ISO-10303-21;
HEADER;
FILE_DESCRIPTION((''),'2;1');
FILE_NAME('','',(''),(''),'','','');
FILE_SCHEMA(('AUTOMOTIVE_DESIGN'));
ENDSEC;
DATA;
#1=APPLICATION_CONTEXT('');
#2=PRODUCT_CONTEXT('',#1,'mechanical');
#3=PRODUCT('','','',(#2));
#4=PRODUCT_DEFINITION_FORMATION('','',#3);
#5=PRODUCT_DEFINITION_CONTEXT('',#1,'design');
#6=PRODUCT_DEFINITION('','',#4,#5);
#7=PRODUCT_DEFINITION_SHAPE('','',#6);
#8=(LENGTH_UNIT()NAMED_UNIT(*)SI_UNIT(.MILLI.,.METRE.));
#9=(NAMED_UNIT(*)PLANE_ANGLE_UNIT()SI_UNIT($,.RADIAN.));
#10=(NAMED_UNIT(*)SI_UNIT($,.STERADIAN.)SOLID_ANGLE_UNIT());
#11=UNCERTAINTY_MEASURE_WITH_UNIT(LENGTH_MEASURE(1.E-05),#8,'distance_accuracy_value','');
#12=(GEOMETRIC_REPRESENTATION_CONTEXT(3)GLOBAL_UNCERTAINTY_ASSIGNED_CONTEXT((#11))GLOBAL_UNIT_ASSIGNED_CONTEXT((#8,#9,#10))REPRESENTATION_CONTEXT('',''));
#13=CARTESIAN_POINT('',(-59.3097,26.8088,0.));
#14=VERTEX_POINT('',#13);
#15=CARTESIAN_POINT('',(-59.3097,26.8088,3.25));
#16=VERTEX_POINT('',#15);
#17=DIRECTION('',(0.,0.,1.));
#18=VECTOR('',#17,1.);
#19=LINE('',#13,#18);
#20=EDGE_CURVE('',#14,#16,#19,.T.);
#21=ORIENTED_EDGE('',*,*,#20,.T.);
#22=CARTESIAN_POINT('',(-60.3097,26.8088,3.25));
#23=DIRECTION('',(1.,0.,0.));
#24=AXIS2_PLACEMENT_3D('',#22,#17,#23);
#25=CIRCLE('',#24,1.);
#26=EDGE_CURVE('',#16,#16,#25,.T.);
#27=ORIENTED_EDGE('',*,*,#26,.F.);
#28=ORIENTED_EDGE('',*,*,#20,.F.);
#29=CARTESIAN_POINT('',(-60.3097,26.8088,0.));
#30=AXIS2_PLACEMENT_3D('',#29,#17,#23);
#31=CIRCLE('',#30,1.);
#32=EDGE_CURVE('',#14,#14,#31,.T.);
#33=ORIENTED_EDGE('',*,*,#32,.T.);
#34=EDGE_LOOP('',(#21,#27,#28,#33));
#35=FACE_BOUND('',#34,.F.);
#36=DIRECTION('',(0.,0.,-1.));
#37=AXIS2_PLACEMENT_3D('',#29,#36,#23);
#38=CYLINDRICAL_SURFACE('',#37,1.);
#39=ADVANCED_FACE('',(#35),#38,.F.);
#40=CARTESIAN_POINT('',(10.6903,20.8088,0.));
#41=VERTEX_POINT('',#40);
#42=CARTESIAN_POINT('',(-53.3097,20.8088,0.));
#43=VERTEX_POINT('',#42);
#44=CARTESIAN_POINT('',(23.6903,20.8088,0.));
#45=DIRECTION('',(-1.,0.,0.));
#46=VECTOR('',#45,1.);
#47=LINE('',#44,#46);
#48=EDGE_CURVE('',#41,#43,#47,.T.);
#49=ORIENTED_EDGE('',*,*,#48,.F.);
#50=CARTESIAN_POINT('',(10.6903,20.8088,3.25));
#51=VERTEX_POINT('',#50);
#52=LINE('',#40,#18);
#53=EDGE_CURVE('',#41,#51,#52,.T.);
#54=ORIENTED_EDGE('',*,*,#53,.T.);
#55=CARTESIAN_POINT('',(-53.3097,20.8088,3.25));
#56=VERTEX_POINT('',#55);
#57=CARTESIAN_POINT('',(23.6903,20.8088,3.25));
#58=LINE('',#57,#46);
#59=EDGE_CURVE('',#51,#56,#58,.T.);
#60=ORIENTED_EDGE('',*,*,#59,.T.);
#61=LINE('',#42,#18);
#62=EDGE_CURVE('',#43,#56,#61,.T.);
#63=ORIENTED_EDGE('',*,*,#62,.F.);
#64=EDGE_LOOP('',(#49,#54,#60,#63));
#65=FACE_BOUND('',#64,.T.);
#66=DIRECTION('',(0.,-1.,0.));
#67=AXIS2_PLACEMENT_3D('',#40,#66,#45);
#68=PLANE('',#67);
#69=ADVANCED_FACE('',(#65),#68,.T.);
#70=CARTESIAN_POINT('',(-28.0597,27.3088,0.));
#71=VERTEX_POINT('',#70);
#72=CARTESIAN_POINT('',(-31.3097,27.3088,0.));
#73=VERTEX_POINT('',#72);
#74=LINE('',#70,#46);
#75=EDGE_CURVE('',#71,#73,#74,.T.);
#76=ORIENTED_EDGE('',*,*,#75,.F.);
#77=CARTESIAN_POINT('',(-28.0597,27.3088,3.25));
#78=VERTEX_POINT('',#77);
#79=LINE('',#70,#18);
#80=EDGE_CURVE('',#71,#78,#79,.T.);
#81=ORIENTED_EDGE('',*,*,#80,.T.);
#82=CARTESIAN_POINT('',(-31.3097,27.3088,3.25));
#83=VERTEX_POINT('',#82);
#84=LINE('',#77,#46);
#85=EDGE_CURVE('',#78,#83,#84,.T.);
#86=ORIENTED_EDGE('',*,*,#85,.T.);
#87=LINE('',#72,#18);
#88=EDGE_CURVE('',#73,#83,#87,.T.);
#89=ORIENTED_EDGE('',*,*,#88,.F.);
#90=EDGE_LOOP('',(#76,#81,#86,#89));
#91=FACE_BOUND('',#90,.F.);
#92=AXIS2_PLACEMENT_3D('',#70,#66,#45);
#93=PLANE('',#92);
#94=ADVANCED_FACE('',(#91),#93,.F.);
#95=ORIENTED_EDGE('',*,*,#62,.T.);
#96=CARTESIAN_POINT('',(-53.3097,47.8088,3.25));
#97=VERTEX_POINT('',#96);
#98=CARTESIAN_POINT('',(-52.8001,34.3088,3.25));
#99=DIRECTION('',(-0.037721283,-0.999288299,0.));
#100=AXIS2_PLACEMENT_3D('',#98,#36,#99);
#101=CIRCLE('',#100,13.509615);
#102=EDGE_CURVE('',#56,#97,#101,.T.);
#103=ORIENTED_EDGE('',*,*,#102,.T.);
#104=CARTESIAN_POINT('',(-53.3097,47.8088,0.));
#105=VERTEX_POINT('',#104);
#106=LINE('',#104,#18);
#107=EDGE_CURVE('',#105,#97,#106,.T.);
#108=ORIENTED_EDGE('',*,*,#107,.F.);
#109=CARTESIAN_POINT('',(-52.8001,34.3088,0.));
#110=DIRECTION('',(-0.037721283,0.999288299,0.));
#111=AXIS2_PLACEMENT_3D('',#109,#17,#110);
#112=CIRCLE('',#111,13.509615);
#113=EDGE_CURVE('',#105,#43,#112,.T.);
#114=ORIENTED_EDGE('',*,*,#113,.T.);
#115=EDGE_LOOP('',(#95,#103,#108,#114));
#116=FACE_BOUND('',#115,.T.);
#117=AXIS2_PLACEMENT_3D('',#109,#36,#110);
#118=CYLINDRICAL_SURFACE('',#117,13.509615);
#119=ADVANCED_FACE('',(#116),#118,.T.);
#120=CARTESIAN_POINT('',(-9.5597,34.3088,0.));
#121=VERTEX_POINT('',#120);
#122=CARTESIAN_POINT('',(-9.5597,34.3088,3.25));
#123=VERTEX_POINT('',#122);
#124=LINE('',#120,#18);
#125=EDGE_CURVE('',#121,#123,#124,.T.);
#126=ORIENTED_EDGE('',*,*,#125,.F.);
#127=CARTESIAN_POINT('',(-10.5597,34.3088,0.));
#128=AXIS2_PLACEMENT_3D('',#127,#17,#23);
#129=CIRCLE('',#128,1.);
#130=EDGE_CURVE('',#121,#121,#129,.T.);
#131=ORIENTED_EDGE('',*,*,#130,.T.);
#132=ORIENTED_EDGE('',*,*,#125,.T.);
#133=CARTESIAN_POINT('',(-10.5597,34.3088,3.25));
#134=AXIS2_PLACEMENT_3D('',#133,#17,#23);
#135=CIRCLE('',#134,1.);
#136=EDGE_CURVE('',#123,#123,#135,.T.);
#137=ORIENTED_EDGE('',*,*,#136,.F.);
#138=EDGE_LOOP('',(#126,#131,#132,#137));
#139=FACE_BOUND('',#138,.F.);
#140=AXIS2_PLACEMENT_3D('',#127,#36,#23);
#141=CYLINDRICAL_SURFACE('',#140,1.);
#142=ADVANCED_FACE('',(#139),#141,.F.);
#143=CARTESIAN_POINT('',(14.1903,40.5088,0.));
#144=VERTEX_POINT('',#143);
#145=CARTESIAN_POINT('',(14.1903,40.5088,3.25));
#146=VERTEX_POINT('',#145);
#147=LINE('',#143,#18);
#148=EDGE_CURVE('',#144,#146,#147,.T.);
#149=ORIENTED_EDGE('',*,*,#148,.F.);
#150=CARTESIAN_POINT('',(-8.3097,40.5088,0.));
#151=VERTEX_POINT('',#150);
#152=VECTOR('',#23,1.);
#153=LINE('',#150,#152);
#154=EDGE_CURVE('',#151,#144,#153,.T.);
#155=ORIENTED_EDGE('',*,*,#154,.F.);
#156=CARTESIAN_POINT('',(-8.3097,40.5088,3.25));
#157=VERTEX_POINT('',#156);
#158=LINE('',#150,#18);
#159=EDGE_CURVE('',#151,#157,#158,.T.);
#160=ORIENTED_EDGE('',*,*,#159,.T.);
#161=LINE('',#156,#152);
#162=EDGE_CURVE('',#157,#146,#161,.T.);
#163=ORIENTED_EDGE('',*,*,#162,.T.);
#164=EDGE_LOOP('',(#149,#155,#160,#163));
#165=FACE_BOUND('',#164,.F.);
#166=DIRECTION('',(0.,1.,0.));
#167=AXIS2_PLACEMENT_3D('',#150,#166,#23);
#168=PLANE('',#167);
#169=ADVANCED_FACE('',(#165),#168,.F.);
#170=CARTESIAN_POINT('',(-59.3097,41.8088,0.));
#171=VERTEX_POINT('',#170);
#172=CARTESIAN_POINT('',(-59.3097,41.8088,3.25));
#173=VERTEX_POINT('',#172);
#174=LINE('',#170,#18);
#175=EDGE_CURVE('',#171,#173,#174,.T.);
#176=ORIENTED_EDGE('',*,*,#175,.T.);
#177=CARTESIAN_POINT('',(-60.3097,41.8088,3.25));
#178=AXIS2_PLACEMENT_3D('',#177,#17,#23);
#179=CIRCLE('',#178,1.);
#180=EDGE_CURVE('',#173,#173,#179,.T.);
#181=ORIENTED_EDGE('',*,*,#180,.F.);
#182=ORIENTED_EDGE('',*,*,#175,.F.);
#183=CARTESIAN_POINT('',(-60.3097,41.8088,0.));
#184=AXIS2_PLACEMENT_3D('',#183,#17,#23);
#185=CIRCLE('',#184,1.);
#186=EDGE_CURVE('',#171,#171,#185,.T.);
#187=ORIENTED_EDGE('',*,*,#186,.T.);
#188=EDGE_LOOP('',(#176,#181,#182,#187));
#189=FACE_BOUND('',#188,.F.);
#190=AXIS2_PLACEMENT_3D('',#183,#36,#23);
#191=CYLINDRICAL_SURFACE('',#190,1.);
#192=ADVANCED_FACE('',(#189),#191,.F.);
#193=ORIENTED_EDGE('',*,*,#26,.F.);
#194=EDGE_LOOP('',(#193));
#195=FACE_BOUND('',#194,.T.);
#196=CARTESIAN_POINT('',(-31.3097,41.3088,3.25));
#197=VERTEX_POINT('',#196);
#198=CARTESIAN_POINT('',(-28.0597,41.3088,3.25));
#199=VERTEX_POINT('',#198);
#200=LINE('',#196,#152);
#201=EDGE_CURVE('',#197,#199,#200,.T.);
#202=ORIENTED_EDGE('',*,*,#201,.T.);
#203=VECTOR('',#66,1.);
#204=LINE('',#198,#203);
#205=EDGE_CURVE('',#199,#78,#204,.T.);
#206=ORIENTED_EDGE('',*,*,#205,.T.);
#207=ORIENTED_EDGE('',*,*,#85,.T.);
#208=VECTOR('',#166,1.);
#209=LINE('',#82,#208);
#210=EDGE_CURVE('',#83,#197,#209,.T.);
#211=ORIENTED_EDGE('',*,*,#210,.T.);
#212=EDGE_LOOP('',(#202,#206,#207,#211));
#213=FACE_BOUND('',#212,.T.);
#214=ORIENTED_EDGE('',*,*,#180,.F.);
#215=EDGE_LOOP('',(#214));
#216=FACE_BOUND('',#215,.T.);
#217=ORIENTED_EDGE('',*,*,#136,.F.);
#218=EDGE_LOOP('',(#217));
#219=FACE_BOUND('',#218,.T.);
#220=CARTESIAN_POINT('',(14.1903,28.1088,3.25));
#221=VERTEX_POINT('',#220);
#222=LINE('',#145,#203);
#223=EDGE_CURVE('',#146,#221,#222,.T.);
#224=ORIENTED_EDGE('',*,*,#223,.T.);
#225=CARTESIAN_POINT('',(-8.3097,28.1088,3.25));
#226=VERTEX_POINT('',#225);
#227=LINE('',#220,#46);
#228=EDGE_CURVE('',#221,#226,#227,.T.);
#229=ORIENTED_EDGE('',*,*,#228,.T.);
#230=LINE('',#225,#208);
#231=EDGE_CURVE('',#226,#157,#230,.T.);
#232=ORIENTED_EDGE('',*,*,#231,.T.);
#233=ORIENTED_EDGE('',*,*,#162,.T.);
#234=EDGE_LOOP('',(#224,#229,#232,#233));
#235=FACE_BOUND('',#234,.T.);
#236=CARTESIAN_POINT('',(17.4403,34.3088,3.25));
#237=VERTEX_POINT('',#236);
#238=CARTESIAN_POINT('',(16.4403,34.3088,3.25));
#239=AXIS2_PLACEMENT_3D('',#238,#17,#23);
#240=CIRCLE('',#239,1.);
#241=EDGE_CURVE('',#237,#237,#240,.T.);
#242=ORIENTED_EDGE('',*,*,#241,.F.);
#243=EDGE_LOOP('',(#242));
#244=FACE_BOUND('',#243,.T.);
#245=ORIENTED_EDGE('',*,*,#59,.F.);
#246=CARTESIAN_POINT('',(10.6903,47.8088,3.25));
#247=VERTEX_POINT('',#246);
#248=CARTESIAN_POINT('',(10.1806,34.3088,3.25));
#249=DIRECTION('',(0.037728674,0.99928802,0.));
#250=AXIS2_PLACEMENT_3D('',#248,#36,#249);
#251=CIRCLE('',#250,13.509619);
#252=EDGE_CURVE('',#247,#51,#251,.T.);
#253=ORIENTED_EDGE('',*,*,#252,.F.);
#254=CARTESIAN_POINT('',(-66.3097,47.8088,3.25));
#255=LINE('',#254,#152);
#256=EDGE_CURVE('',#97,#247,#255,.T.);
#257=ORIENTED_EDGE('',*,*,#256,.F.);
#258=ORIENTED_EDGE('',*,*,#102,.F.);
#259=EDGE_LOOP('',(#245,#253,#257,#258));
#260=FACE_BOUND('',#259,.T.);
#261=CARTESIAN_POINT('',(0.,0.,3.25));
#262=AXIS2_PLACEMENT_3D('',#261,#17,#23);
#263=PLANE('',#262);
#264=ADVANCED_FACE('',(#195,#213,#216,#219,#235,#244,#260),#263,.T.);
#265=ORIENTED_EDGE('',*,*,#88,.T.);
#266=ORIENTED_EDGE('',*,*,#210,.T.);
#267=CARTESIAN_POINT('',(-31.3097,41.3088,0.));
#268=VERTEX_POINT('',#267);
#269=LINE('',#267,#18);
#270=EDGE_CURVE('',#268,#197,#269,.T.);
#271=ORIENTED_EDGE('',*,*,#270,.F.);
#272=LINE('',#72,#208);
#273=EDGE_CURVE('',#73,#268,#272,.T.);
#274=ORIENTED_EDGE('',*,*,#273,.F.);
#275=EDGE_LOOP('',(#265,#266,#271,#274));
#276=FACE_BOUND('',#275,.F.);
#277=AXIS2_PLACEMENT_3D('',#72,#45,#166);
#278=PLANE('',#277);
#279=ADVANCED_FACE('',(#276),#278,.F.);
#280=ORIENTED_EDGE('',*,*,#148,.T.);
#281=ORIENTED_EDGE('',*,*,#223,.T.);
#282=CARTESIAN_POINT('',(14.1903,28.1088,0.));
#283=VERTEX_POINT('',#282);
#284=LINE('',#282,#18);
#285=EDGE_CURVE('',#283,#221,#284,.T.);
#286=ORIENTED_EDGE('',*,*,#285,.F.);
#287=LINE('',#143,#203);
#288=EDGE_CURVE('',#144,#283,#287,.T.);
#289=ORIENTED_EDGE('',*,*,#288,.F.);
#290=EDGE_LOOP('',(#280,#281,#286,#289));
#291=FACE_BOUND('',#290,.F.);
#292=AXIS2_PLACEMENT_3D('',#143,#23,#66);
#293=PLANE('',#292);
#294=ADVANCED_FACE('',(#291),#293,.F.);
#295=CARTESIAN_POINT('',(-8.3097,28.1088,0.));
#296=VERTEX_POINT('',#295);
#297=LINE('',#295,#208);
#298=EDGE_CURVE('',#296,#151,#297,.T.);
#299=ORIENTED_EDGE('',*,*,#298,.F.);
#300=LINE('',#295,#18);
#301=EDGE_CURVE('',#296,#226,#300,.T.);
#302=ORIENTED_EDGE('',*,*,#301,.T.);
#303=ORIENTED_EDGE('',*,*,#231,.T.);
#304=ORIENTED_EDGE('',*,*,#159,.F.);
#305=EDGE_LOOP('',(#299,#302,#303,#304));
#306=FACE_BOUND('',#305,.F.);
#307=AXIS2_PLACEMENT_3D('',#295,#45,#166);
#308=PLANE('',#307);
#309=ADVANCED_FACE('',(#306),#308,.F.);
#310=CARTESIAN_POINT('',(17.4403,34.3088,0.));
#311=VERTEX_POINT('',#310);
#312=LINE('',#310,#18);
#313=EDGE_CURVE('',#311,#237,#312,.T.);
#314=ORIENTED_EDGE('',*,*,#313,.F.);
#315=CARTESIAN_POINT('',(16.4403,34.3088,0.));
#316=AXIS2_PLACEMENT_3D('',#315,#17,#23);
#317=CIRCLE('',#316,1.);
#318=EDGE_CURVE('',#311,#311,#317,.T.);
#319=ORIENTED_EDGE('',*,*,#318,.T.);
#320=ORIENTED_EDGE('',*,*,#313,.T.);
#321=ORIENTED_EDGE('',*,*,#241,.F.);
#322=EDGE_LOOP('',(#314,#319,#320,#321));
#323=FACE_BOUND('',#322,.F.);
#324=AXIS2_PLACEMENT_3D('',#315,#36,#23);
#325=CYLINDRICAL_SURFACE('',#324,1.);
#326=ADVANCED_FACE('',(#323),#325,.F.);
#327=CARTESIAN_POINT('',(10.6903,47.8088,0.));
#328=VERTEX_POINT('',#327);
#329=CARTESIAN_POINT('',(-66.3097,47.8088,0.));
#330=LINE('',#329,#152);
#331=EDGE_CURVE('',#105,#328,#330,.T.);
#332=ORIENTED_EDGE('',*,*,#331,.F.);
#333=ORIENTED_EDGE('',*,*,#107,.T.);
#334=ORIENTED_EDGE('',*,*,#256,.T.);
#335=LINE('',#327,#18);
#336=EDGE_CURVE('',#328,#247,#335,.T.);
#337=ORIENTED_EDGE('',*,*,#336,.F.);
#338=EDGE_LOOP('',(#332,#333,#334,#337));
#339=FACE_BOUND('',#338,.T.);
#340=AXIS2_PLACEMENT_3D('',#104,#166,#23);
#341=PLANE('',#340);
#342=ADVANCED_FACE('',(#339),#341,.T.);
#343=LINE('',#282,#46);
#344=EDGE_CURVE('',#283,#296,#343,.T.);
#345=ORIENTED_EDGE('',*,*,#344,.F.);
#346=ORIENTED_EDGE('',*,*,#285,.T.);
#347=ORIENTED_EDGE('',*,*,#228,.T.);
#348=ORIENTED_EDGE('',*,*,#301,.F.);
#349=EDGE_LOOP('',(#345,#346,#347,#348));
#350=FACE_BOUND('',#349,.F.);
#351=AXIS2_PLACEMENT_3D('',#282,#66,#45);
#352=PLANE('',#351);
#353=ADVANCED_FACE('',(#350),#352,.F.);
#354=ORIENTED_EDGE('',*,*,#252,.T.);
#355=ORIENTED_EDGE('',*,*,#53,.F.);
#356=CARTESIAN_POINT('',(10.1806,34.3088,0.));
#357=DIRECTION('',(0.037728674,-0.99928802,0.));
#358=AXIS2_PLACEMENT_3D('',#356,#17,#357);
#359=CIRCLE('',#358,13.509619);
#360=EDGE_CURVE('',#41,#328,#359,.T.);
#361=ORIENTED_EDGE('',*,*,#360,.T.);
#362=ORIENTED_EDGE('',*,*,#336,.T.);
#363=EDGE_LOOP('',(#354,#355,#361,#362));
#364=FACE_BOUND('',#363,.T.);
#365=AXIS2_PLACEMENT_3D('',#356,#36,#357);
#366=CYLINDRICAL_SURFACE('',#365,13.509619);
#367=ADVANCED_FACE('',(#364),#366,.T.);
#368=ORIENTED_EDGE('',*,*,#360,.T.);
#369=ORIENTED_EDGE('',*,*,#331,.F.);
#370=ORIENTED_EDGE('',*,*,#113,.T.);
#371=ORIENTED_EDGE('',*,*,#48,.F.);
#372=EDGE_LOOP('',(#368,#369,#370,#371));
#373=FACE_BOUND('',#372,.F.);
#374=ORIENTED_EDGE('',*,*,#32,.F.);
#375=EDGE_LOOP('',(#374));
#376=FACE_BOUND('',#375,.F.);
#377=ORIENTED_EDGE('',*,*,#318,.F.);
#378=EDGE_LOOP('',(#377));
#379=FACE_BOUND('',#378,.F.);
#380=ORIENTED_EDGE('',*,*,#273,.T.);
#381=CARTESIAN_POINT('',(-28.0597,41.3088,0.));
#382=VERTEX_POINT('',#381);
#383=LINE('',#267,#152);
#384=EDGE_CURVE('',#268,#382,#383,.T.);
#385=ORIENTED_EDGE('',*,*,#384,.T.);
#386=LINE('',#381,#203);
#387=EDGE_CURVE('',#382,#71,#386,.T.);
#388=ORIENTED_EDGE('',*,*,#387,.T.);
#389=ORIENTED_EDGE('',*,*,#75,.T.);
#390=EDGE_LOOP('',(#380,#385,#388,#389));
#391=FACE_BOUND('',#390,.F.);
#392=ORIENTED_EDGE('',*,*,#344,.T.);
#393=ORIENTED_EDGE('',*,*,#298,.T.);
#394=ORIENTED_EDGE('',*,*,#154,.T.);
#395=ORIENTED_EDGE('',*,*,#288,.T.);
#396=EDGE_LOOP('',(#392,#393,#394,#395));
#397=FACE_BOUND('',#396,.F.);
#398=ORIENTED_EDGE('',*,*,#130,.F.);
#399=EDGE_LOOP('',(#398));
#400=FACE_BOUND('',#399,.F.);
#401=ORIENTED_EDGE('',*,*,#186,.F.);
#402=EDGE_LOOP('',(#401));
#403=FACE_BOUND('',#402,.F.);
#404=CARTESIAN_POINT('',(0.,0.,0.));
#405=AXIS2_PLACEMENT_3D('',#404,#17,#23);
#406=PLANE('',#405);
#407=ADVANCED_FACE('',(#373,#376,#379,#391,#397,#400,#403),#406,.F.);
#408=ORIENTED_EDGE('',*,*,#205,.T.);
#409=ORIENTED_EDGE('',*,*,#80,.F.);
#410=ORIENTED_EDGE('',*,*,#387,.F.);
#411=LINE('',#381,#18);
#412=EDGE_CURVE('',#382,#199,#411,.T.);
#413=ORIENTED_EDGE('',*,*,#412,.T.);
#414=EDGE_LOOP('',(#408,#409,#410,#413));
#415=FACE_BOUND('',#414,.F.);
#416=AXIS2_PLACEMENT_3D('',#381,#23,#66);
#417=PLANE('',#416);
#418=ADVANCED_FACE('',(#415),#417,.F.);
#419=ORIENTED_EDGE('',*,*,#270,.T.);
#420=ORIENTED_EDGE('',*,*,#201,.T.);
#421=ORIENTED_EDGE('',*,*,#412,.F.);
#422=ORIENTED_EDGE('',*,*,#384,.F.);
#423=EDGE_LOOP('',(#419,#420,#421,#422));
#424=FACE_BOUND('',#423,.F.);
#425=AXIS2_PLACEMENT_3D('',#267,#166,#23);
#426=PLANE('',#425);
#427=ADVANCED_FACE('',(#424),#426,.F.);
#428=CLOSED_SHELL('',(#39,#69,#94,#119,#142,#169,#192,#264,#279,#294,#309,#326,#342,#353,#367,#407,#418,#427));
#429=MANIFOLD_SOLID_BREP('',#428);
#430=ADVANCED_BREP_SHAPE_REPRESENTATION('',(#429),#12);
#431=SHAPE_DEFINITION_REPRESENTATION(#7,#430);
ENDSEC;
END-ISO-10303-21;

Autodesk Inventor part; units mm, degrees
ref_plane "YZ Plane" through (0, 0, 0) normal (1, 0, 0) x (0, 1, 0)
ref_plane "XZ Plane" through (0, 0, 0) normal (0, 1, 0) x (-1, 0, 0)
ref_plane "XY Plane" through (0, 0, 0) normal (0, 0, 1) x (1, 0, 0)
sketch "Block1" plane through (0, 0, 0) normal (0, 0, 1) x (1, 0, 0)
  circle A0 centre (74.029, 24.2723) radius 1
  line L0 (49.279, 30.4723) -> (71.779, 30.4723)
  line L1 (71.779, 30.4723) -> (71.779, 18.0723)
  line L2 (71.779, 18.0723) -> (49.279, 18.0723)
  line L3 (49.279, 18.0723) -> (49.279, 30.4723)
  line L4 (49.279, 30.4723) -> (44.779, 30.4723)
  line L5 (44.779, 30.4723) -> (44.779, 18.0723)
  line L6 (44.779, 18.0723) -> (49.279, 18.0723)
  line L7 (49.279, 18.0723) -> (49.279, 30.4723)
  line L8 (71.779, 30.4723) -> (76.279, 30.4723)
  line L9 (76.279, 30.4723) -> (76.279, 18.0723)
  line L10 (76.279, 18.0723) -> (71.779, 18.0723)
  line L11 (71.779, 18.0723) -> (71.779, 30.4723)
  line L12 (44.779, 24.2723) -> (76.279, 24.2723) construction
  line L13 (47.029, 30.4723) -> (47.029, 18.0723) construction
  circle A1 centre (47.029, 24.2723) radius 1
  line L14 (74.029, 30.4723) -> (74.029, 18.0723) construction
  point P0 (60.979, 24.0984)
  dimension "d7" = 22.5
  dimension "d8" = 12.4
  dimension "d9" = 4.5
  dimension "d10" = 4.5
  dimension "d11" = 2
  dimension "d12" = 2
sketch "Sketch1" plane through (0, 0, 0) normal (0, 0, 1) x (1, 0, 0)
  line L0 (-92.7646, -8.503) -> (-89.7646, -8.503)
  line L1 (-89.7646, -8.503) -> (-89.7646, -11.753)
  line L2 (-89.7646, -11.753) -> (-92.7646, -11.753)
  line L3 (-92.7646, -11.753) -> (-92.7646, -8.503)
  line L4 (-92.7646, -21.6527) -> (-89.7646, -21.6527)
  line L5 (-89.7646, -21.6527) -> (-89.7646, -21.7527)
  line L6 (-89.7646, -21.7527) -> (-92.7646, -21.7527)
  line L7 (-92.7646, -21.7527) -> (-92.7646, -21.6527)
  line L8 (-66.3097, 47.8088) -> (23.6903, 47.8088)
  line L9 (23.6903, 47.8088) -> (23.6903, 20.8088)
  line L10 (23.6903, 20.8088) -> (-66.3097, 20.8088)
  line L11 (-66.3097, 20.8088) -> (-66.3097, 47.8088)
  line L12 (-66.3097, 34.3088) -> (23.6903, 34.3088) construction
  circle A0 centre (-60.3097, 41.8088) radius 1
  circle A1 centre (-60.3097, 26.8088) radius 1
  line L13 (-31.3097, 41.3088) -> (-28.0597, 41.3088)
  line L14 (-28.0597, 41.3088) -> (-28.0597, 27.3088)
  line L15 (-28.0597, 27.3088) -> (-31.3097, 27.3088)
  line L16 (-31.3097, 27.3088) -> (-31.3097, 41.3088)
  line L17 (-31.3097, 34.3088) -> (-28.0597, 34.3088) construction
  line L18 (-53.3097, 47.8088) -> (-53.3097, 20.8088) construction
  line L19 (-21.3097, 47.8088) -> (-21.3097, 20.8088) construction
  line L20 (10.6903, 47.8088) -> (10.6903, 20.8088) construction
  arc A2 (-53.3097, 47.8088) -> (-53.3097, 20.8088) centre (-52.8001, 34.3088) ccw
  arc A3 (10.6903, 20.8088) -> (10.6903, 47.8088) centre (10.1806, 34.3088) ccw
  circle A4 centre (-10.5597, 34.3088) radius 1
  line L21 (14.1903, 28.1088) -> (-8.3097, 28.1088)
  line L22 (-8.3097, 28.1088) -> (-8.3097, 40.5088)
  line L23 (-8.3097, 40.5088) -> (14.1903, 40.5088)
  line L24 (14.1903, 40.5088) -> (14.1903, 28.1088)
  line L25 (14.1903, 28.1088) -> (18.6903, 28.1088)
  line L26 (18.6903, 28.1088) -> (18.6903, 40.5088)
  line L27 (18.6903, 40.5088) -> (14.1903, 40.5088)
  line L28 (14.1903, 40.5088) -> (14.1903, 28.1088)
  line L29 (-8.3097, 28.1088) -> (-12.8097, 28.1088)
  line L30 (-12.8097, 28.1088) -> (-12.8097, 40.5088)
  line L31 (-12.8097, 40.5088) -> (-8.3097, 40.5088)
  line L32 (-8.3097, 40.5088) -> (-8.3097, 28.1088)
  line L33 (18.6903, 34.3088) -> (-12.8097, 34.3088) construction
  line L34 (16.4403, 28.1088) -> (16.4403, 40.5088) construction
  circle A5 centre (16.4403, 34.3088) radius 1
  line L35 (-10.5597, 28.1088) -> (-10.5597, 40.5088) construction
  point P0 (0, 0)
  dimension "d0" = 3
  dimension "mat" = 3.25
  dimension "d2" = 3
  dimension "d3" = 0.1
  dimension "d23" = 90
  dimension "d24" = 27
  dimension "d25" = 5
  dimension "d26" = 2
  dimension "d27" = 5
  dimension "d28" = 5
  dimension "d29" = 3.25
  dimension "d30" = 14
  dimension "d31" = 35
  dimension "d36" = 13
  dimension "d38" = 13
extrude "Extrusion4" add sketch "Sketch1" along normal blind 3.25 contours L8 A3 L10 A2 | L24 L27 L26 L25 | L29 L30 L31 L22
equation "\"d29\" = mat"
equation "\"d40\" = mat"
properties part number "arm-servo"
